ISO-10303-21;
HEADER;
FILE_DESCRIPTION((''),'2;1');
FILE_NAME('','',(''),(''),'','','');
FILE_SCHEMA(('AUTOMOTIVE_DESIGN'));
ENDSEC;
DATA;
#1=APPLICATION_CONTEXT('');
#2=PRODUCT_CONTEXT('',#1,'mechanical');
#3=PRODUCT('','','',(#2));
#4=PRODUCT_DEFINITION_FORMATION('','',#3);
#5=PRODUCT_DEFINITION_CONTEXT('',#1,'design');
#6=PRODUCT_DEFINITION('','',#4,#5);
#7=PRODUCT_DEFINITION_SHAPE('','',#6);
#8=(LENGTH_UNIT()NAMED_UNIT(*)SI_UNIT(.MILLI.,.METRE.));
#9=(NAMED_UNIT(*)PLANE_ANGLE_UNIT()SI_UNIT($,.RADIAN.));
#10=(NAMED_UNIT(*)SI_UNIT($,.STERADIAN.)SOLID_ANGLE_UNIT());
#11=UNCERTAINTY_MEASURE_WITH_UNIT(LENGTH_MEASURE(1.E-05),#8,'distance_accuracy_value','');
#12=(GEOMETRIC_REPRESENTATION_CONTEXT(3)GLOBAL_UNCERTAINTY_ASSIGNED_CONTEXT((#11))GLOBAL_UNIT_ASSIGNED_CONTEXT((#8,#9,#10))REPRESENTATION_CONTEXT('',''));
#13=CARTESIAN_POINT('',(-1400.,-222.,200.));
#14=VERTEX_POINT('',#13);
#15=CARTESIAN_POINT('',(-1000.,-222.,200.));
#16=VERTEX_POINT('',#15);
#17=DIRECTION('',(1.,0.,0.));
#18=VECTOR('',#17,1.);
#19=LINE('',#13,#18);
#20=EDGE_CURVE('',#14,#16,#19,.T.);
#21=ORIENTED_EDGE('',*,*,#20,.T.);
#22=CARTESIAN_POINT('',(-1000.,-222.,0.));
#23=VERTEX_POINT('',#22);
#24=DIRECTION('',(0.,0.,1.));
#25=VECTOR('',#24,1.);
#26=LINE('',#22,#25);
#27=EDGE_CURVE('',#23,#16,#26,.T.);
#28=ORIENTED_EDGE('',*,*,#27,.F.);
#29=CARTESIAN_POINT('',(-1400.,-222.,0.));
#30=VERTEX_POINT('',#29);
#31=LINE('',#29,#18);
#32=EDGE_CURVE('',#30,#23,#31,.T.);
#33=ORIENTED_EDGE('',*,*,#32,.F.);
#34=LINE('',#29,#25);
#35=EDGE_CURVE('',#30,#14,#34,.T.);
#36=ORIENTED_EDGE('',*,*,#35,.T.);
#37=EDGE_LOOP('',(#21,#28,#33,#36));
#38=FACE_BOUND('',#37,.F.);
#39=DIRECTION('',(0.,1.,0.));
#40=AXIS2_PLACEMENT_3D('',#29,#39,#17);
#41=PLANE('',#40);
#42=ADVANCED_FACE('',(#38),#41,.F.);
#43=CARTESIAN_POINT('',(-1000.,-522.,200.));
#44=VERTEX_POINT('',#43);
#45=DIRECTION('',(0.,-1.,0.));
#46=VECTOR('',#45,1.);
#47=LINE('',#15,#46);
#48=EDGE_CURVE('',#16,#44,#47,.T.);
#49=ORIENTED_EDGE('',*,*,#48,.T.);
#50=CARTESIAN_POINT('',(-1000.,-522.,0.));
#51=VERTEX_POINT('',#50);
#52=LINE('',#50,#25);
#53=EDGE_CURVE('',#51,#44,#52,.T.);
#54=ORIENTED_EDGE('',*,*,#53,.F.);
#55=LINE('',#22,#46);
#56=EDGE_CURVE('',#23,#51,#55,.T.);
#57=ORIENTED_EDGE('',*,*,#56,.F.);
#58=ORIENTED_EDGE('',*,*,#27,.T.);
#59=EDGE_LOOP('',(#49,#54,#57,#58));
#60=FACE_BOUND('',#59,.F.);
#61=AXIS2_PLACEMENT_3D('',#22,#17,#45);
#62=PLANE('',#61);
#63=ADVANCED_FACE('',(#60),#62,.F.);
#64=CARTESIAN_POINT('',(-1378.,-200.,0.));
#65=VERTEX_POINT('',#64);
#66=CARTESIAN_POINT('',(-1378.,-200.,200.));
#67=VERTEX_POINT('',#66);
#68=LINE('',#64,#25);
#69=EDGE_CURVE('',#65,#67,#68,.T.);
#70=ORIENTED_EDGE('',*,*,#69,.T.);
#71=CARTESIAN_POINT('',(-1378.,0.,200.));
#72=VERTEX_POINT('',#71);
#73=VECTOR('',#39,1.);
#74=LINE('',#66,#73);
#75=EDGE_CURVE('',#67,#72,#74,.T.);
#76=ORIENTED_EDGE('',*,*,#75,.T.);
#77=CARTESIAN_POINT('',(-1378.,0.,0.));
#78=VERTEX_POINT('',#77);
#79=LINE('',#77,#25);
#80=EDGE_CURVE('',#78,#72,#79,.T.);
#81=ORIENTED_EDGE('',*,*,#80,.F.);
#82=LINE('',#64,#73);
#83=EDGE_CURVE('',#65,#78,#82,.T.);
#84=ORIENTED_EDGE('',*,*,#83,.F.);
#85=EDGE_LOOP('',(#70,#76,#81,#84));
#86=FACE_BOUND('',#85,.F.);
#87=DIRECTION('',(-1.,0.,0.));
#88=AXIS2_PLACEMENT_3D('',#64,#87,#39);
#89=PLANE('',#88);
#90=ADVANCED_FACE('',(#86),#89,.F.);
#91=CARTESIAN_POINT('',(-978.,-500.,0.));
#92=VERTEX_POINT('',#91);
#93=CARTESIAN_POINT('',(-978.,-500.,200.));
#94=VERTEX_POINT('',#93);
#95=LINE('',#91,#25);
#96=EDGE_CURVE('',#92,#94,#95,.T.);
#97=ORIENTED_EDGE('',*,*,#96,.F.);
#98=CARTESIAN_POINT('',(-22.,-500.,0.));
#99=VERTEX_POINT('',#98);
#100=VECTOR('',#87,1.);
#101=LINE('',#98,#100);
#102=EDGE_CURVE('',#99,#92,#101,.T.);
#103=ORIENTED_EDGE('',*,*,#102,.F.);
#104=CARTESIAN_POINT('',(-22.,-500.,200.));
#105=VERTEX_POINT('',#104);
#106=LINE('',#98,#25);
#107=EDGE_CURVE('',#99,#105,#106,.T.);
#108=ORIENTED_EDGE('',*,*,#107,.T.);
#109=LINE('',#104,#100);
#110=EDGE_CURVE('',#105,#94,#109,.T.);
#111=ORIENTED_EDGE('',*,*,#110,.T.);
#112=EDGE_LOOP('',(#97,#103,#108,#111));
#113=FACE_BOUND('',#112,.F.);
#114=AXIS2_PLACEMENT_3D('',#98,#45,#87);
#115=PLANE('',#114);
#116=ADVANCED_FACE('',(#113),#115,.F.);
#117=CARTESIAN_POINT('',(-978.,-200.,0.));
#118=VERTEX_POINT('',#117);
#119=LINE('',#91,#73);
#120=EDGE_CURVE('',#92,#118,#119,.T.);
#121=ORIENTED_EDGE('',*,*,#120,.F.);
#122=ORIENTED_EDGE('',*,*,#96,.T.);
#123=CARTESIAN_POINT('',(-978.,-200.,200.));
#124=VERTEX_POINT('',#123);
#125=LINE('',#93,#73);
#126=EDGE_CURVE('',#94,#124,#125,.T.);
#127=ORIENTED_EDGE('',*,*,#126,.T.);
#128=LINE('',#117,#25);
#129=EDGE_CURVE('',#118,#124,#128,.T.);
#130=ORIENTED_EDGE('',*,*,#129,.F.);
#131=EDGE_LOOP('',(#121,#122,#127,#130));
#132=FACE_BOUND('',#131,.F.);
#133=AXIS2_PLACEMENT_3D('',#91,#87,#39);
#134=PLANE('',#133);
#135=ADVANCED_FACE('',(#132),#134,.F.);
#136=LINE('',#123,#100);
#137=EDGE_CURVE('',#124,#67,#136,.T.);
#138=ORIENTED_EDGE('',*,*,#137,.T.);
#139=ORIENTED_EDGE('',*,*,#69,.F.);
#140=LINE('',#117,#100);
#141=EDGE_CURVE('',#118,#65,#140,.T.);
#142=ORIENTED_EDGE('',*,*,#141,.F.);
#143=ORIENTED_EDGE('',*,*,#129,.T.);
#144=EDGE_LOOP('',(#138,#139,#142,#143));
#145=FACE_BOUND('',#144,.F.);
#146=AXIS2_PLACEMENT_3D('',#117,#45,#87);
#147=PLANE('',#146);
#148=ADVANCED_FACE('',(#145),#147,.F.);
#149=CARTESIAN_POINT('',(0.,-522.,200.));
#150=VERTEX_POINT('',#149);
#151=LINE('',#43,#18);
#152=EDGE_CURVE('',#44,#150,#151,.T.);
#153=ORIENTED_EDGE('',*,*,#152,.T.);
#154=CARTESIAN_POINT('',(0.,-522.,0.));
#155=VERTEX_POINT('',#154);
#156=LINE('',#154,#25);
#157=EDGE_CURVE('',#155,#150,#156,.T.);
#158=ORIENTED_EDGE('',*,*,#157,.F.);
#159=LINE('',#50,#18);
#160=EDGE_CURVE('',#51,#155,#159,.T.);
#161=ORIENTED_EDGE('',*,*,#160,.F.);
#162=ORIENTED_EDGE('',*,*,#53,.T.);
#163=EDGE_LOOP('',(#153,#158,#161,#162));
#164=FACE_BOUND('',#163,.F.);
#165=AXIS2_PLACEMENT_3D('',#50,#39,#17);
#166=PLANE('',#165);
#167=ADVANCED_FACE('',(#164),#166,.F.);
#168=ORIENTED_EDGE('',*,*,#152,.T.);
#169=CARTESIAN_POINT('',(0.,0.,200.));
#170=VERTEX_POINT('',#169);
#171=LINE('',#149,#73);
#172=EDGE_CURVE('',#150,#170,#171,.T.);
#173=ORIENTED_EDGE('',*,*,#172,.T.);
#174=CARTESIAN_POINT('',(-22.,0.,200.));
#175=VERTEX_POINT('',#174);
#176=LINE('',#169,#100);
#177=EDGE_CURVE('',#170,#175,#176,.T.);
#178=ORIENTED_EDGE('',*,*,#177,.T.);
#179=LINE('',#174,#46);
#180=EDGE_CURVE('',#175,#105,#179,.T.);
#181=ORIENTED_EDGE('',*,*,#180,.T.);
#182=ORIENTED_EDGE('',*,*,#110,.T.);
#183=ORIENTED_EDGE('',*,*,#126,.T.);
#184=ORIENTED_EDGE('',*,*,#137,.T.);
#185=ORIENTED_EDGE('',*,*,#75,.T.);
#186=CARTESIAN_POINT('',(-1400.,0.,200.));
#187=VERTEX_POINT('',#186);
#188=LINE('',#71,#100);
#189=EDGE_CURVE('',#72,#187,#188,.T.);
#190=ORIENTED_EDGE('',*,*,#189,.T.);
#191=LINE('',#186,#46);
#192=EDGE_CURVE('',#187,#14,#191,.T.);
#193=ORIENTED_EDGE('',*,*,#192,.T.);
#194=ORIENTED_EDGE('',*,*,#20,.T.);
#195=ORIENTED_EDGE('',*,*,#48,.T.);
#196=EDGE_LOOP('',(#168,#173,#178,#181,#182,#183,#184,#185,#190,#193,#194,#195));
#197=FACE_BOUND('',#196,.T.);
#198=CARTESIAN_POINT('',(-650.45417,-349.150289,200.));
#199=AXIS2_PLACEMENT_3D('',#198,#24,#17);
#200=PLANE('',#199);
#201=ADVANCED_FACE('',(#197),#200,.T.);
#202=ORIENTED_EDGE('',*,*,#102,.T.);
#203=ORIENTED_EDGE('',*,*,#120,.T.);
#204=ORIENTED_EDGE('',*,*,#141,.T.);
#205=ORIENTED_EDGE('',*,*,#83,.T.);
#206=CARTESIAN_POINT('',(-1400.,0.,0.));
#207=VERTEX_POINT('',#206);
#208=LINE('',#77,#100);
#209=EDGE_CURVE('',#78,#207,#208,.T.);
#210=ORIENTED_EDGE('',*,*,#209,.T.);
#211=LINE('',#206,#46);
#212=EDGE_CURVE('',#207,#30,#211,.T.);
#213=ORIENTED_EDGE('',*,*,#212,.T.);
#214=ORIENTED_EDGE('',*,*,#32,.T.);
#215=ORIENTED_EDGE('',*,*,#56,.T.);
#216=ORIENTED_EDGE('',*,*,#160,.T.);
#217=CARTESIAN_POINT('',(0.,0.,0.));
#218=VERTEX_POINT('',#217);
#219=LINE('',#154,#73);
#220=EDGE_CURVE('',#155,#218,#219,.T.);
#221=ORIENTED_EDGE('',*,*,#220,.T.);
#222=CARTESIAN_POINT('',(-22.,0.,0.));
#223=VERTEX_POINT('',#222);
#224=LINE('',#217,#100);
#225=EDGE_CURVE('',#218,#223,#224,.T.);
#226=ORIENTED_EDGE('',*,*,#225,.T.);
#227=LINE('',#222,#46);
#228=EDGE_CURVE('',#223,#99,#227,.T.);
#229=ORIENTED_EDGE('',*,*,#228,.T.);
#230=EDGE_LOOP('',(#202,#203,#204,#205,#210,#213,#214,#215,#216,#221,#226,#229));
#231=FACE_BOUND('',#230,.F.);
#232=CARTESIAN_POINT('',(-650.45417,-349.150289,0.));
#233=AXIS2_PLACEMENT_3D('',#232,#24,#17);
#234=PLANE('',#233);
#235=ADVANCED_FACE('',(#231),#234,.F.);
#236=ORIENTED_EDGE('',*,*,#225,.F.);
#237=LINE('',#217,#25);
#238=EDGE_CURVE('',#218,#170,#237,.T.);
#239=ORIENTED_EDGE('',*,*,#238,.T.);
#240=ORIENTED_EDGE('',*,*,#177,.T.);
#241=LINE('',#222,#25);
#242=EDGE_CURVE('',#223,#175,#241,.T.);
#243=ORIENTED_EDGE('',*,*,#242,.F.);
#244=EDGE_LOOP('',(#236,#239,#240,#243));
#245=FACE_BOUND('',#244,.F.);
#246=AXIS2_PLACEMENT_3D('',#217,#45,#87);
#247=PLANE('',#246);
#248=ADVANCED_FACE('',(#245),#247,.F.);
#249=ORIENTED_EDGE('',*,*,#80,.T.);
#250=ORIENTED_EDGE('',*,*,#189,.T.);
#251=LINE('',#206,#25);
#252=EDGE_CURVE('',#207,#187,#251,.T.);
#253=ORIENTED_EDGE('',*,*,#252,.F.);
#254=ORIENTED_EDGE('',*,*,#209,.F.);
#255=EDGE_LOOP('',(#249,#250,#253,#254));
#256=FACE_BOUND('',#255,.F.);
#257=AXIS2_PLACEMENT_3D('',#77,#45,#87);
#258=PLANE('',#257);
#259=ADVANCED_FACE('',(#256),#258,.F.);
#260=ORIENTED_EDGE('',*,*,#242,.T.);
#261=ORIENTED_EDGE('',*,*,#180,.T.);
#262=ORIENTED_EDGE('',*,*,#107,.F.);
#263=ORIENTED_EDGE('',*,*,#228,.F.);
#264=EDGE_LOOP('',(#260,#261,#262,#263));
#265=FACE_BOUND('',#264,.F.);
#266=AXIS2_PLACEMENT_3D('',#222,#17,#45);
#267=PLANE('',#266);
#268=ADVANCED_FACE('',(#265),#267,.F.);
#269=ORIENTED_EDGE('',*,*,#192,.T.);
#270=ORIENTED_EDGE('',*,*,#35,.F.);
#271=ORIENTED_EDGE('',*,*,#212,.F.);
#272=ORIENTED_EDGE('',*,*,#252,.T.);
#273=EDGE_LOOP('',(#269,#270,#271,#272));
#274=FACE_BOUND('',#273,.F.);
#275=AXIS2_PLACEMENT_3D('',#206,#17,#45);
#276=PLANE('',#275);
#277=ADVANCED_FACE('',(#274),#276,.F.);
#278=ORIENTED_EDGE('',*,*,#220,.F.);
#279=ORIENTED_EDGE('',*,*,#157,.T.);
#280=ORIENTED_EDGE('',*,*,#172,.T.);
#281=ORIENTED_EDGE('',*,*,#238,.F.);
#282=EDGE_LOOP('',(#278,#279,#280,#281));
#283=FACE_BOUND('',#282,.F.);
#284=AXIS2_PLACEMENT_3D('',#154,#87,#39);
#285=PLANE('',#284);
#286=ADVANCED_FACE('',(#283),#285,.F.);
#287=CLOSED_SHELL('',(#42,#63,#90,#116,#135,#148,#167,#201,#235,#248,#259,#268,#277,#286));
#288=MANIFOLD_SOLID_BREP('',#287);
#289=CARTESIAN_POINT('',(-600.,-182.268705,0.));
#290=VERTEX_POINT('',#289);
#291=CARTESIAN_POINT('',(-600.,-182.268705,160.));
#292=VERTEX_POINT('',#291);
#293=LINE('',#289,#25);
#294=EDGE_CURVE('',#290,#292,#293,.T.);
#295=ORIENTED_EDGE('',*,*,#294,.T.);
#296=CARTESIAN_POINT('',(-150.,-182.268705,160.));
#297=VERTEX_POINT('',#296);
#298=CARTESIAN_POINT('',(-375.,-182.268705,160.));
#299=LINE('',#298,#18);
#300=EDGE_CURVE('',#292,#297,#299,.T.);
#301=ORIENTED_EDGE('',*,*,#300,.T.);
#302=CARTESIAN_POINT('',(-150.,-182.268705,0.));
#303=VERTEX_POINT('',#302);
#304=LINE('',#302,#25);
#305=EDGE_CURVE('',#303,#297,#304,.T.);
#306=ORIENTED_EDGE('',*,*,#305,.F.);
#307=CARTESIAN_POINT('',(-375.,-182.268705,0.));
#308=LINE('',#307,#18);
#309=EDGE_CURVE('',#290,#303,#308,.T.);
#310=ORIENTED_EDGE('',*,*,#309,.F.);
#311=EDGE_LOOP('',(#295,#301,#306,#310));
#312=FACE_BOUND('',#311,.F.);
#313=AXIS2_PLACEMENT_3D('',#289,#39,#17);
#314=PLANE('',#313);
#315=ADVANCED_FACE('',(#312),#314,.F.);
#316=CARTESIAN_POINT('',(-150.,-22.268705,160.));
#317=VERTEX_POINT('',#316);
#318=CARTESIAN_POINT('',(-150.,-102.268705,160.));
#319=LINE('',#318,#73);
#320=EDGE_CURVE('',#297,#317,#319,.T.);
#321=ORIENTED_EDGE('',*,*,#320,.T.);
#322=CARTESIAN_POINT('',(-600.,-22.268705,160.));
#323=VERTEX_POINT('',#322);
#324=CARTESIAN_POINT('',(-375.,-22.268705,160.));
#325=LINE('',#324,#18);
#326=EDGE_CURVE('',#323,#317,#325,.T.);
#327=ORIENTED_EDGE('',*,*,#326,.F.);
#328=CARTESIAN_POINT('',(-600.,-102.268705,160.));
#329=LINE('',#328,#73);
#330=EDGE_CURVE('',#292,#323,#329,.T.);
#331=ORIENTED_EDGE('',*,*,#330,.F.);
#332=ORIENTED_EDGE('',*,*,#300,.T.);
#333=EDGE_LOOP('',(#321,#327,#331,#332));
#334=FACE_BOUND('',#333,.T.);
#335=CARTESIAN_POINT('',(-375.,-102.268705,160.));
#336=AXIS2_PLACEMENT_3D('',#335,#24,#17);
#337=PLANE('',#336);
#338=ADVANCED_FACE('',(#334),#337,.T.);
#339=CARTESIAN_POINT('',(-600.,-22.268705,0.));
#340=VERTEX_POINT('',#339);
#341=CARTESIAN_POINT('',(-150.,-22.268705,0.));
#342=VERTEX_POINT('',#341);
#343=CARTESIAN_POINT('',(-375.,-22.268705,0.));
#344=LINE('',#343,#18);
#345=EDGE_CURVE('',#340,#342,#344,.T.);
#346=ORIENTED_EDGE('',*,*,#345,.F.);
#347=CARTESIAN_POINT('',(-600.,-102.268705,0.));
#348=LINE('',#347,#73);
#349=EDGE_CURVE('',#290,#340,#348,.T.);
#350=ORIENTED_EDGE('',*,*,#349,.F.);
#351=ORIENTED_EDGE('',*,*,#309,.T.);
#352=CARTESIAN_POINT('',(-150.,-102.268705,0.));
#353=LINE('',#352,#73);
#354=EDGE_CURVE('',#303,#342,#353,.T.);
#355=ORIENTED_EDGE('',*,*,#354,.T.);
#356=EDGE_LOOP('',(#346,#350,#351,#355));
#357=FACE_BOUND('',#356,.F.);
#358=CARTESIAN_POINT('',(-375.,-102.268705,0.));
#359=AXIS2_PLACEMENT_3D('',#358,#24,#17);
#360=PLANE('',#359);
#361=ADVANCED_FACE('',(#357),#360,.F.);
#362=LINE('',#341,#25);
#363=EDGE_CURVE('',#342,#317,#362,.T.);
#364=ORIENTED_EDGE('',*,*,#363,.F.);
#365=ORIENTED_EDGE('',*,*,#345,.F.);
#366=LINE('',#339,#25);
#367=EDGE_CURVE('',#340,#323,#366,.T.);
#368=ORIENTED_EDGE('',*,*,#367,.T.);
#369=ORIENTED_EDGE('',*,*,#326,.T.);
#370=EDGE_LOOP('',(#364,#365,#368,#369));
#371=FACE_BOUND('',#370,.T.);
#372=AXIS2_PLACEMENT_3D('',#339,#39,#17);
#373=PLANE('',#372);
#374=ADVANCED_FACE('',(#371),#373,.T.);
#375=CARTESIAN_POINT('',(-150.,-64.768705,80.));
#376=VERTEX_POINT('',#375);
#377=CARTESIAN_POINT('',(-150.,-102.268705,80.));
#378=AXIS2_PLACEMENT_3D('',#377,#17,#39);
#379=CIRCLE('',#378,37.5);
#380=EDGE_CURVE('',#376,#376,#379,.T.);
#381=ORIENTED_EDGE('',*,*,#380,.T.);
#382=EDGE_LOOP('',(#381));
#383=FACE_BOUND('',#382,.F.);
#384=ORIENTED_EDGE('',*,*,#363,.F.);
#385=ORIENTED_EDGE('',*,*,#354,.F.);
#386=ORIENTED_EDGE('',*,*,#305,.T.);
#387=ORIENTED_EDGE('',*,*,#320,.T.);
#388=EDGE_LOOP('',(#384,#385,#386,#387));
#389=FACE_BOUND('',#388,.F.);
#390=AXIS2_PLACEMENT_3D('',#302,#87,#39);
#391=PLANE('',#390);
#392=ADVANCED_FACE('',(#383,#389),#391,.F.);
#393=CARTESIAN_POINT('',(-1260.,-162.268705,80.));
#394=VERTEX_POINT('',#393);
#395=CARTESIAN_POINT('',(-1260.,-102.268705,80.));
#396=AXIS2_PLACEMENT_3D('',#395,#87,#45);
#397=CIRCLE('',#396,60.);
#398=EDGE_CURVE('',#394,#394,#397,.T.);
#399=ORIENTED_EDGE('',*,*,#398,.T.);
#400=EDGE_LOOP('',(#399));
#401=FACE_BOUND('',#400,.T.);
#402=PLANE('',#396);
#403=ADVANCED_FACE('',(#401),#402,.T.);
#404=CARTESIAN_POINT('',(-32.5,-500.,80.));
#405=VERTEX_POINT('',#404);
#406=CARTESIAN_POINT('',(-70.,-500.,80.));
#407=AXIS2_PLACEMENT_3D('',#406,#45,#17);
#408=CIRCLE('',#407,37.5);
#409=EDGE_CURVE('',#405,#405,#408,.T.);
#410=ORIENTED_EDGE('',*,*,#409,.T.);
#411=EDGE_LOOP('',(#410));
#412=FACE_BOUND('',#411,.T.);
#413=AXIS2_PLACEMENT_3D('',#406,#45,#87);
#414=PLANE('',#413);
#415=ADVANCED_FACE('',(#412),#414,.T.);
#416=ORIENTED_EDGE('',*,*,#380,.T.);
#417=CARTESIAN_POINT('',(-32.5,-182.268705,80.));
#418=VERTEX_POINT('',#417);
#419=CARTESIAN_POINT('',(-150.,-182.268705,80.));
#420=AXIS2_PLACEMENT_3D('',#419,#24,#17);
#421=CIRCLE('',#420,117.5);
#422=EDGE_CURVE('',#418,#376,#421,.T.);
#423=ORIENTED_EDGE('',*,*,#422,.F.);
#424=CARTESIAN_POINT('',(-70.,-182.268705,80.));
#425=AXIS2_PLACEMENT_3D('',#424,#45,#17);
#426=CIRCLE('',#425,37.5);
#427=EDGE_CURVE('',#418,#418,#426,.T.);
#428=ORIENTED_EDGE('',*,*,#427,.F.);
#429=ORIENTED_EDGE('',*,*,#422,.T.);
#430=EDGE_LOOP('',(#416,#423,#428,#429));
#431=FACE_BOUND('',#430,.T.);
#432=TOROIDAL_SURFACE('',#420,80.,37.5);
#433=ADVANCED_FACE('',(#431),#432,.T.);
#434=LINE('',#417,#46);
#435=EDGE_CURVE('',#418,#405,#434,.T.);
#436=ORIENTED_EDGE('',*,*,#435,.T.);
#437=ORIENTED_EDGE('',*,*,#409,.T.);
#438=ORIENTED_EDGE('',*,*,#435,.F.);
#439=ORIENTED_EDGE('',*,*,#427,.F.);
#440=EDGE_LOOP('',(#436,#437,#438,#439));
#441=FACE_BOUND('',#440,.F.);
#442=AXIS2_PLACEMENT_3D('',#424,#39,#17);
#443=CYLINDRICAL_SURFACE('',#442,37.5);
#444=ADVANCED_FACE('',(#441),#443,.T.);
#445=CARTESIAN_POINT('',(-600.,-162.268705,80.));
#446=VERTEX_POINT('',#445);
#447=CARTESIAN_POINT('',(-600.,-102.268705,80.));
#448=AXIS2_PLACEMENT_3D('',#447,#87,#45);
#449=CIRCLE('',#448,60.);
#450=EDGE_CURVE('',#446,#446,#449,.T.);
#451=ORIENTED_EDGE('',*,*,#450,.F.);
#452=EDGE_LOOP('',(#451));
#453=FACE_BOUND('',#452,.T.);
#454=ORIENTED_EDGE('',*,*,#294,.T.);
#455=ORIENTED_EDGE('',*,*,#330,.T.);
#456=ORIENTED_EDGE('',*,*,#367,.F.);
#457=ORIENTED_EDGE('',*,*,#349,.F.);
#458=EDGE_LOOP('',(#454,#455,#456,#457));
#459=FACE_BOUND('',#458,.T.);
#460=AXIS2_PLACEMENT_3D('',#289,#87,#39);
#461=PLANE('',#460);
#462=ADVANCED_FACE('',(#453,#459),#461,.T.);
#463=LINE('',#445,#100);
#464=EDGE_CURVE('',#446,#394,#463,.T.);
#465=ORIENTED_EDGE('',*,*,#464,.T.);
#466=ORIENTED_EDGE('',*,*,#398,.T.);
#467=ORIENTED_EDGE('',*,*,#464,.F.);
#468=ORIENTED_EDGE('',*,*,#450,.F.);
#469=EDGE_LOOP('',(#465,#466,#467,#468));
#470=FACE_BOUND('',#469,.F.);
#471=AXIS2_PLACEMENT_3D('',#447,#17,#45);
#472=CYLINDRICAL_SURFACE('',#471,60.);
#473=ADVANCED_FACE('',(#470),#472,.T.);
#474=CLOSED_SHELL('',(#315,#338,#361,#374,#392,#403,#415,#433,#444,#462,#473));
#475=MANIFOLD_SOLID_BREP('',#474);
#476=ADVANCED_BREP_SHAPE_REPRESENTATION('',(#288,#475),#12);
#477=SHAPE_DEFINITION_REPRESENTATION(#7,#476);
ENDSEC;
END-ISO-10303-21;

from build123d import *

# Parameters (mm, degrees)
F0_W     = 450
F0_H     = 160
F1_DEPTH = 160
F3_DEPTH = 200
F4_R     = 60
F5_DEPTH = 660
F6_R     = 37.5
F9_DEPTH = 317.7312946493


with BuildPart() as f1:
    # F0 (on Top) → F1 (new body)
    with BuildSketch(Plane.XY):
        with Locations((-375, -102.2687053507)):
            Rectangle(F0_W, F0_H)
    extrude(amount=F1_DEPTH)

    # F4 (on face) → F5 (join)
    with BuildSketch(Plane(origin=(-600, 0, 0), x_dir=(0, -1, 0), z_dir=(-1, 0, 0))):
        with Locations((102.2687053507, 80)):
            Circle(F4_R)
    extrude(amount=F5_DEPTH)

    # F8: sweep along a path in F7
    with BuildLine(Plane.XY) as f8_path:
        ThreePointArc((-70, -182.2687053507), (-93.4314575051, -125.7001628558), (-150, -102.2687053507))
    # F6 (on face) → F8 (sweep)
    with BuildSketch(Plane.YZ.offset(-150)):
        with Locations((-102.2687053507, 80)):
            Circle(F6_R)
    sweep(path=f8_path.line)

    # F9 (add, through all): a face of the model
    f9_faces = [f1.faces().sort_by_distance(p)[0] for p in [
        (-70, -182.2687053507, 80),
    ]]
    extrude(f9_faces, amount=F9_DEPTH)


with BuildPart() as f3:
    # F2 (on Top) → F3 (new body)
    with BuildSketch(Plane.XY):
        Polygon((0, -522), (0, 0), (-22, 0), (-22, -500), (-978, -500), (-978, -200), (-1378, -200), (-1378, 0), (-1400, 0), (-1400, -222), (-1000, -222), (-1000, -522), align=None)
    extrude(amount=F3_DEPTH)


solid = Compound([f1.part, f3.part])
